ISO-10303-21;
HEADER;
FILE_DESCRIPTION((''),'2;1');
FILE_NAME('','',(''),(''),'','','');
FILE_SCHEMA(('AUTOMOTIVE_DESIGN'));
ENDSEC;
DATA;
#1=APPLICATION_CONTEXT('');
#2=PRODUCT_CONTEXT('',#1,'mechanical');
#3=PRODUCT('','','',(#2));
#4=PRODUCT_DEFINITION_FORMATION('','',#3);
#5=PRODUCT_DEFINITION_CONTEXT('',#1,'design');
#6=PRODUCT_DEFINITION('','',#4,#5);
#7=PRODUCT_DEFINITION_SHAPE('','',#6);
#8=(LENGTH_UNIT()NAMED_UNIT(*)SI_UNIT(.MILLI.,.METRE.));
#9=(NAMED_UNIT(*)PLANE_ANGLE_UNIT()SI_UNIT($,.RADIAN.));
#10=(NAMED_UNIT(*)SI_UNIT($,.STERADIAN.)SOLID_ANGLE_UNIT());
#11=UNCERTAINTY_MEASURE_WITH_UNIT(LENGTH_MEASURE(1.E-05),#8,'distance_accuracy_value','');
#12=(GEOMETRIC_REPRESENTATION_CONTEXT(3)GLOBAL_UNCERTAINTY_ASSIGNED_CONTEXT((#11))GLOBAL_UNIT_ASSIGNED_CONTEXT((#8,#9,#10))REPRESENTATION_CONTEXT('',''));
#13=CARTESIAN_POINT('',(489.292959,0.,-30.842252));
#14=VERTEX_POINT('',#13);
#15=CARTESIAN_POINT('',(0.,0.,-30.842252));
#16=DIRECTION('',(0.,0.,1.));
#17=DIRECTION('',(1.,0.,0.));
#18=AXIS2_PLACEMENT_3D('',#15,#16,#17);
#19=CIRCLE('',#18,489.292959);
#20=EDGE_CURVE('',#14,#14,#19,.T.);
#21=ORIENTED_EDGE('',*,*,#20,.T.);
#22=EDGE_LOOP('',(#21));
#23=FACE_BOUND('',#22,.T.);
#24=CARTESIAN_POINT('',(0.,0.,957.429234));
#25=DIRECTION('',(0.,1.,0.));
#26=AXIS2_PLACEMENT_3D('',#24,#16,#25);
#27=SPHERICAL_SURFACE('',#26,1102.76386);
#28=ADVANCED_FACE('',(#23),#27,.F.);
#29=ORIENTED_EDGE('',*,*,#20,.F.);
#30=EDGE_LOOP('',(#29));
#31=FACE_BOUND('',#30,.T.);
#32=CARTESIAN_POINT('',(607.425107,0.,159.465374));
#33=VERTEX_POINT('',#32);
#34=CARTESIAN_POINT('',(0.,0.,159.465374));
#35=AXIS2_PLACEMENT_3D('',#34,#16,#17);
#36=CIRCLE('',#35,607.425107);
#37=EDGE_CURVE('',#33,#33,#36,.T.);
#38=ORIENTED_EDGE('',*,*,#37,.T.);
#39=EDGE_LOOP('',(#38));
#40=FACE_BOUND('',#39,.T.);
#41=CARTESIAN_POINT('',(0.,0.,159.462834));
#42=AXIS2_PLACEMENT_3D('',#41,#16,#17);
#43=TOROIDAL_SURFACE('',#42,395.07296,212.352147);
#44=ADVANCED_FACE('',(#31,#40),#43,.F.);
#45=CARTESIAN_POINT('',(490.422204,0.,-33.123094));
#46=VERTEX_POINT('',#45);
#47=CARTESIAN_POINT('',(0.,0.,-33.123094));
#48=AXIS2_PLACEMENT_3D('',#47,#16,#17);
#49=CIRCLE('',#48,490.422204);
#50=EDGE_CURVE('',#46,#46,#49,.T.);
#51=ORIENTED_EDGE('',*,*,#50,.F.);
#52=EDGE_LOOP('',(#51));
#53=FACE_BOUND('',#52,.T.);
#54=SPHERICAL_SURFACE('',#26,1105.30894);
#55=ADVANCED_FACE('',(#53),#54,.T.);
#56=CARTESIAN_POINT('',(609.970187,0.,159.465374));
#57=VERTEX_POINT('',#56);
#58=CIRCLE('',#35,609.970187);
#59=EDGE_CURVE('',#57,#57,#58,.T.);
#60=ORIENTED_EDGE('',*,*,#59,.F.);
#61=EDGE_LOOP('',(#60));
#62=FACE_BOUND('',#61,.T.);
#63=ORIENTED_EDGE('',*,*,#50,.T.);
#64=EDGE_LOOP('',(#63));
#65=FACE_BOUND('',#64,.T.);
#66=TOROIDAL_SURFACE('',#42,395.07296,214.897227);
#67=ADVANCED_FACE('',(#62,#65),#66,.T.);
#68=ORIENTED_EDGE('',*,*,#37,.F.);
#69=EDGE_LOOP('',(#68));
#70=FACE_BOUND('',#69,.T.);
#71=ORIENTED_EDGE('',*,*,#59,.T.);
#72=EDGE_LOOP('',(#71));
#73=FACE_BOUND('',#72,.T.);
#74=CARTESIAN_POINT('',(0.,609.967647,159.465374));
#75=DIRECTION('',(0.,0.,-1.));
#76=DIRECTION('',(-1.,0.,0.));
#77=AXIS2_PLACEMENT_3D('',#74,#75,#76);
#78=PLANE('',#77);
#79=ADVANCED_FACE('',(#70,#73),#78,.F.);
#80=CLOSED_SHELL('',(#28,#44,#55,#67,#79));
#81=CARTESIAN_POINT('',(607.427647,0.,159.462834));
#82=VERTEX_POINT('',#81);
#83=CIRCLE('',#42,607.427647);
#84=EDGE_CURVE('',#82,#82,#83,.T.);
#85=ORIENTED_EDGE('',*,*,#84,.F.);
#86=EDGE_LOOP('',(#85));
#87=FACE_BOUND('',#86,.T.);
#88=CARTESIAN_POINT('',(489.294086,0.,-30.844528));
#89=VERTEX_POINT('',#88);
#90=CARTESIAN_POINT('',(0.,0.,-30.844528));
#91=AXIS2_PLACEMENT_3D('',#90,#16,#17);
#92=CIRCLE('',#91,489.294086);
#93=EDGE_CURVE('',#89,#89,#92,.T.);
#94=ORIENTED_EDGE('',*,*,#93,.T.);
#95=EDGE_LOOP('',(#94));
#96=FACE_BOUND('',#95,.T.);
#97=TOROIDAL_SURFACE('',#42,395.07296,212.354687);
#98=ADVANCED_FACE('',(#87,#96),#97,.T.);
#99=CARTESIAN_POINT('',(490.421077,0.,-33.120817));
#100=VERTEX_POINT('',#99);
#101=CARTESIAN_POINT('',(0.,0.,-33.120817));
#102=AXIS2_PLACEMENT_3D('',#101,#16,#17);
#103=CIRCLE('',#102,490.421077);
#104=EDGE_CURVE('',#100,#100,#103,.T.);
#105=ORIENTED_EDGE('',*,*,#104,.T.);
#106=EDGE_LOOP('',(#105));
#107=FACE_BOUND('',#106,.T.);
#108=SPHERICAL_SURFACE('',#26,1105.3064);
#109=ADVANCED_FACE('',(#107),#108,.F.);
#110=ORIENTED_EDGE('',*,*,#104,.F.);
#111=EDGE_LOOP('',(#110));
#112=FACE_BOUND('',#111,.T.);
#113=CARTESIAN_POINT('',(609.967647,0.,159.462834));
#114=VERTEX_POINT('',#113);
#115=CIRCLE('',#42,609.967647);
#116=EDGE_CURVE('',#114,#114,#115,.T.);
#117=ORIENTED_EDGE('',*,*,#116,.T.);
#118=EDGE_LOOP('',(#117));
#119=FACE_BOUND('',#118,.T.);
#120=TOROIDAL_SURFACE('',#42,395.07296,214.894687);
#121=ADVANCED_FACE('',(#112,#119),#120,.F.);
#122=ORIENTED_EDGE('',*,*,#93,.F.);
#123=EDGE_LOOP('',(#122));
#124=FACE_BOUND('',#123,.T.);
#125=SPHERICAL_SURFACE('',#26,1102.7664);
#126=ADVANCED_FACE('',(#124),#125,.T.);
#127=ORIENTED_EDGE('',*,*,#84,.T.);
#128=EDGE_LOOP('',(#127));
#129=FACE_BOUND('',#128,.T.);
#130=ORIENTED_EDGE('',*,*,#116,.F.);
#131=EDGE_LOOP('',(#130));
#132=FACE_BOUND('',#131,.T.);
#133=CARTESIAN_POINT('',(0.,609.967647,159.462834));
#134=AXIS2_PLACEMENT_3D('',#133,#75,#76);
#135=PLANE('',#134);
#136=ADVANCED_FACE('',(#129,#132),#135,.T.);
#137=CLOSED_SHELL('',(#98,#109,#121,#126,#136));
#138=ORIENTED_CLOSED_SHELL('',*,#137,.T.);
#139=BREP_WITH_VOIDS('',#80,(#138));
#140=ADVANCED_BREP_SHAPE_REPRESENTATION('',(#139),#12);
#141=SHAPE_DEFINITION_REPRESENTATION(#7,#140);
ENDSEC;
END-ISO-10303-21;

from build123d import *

# Parameters (mm, degrees)
SCALE1_SCALE = 25.4


with BuildPart() as part:
    # Sketch1 → Revolve-Thin2 (revolve)
    with BuildSketch(Plane(origin=(0, 0, 0), x_dir=(0, 0, -1), z_dir=(1, 0, 0))):
        with BuildLine():
            ThreePointArc((19.195710728, 0), (18.051167415, 9.914732181), (14.677744268, 19.307916406))
            ThreePointArc((14.677744268, 19.307916406), (11.557742765, 22.742167977), (7.095710728, 24.014474279))
            Line((7.095710728, 24.014474279), (7.095710728, 23.914474279))
            ThreePointArc((7.095710728, 23.914474279), (11.505002693, 22.657206311), (14.588126579, 19.263546712))
            ThreePointArc((14.588126579, 19.263546712), (17.953797581, 9.891948074), (19.095710728, 0))
            Line((19.095710728, 0), (19.095610728, 0))
            ThreePointArc((19.095610728, 0), (17.953700211, 9.891925289), (14.588036962, 19.263502342))
            ThreePointArc((14.588036962, 19.263502342), (11.504907472, 22.657147719), (7.095610728, 23.914374278))
            Line((7.095610728, 23.914374278), (7.095610728, 24.014574278))
            ThreePointArc((7.095610728, 24.014574278), (11.557753024, 22.742279309), (14.677833886, 19.307960776))
            ThreePointArc((14.677833886, 19.307960776), (18.051264784, 9.914754965), (19.195810728, 0))
            Line((19.195810728, 0), (19.195710728, 0))
        make_face()
    revolve(axis=Axis((0, 0, -7.095710728), (0, 0, 1)))


with BuildPart() as part_1:
    # Scale1: scaled about (0, 1e-09, -13.921880613)
    add(part.part.scale(SCALE1_SCALE).moved(Location((0, -2.4e-08, 339.693886957))))


solid = part_1.part
